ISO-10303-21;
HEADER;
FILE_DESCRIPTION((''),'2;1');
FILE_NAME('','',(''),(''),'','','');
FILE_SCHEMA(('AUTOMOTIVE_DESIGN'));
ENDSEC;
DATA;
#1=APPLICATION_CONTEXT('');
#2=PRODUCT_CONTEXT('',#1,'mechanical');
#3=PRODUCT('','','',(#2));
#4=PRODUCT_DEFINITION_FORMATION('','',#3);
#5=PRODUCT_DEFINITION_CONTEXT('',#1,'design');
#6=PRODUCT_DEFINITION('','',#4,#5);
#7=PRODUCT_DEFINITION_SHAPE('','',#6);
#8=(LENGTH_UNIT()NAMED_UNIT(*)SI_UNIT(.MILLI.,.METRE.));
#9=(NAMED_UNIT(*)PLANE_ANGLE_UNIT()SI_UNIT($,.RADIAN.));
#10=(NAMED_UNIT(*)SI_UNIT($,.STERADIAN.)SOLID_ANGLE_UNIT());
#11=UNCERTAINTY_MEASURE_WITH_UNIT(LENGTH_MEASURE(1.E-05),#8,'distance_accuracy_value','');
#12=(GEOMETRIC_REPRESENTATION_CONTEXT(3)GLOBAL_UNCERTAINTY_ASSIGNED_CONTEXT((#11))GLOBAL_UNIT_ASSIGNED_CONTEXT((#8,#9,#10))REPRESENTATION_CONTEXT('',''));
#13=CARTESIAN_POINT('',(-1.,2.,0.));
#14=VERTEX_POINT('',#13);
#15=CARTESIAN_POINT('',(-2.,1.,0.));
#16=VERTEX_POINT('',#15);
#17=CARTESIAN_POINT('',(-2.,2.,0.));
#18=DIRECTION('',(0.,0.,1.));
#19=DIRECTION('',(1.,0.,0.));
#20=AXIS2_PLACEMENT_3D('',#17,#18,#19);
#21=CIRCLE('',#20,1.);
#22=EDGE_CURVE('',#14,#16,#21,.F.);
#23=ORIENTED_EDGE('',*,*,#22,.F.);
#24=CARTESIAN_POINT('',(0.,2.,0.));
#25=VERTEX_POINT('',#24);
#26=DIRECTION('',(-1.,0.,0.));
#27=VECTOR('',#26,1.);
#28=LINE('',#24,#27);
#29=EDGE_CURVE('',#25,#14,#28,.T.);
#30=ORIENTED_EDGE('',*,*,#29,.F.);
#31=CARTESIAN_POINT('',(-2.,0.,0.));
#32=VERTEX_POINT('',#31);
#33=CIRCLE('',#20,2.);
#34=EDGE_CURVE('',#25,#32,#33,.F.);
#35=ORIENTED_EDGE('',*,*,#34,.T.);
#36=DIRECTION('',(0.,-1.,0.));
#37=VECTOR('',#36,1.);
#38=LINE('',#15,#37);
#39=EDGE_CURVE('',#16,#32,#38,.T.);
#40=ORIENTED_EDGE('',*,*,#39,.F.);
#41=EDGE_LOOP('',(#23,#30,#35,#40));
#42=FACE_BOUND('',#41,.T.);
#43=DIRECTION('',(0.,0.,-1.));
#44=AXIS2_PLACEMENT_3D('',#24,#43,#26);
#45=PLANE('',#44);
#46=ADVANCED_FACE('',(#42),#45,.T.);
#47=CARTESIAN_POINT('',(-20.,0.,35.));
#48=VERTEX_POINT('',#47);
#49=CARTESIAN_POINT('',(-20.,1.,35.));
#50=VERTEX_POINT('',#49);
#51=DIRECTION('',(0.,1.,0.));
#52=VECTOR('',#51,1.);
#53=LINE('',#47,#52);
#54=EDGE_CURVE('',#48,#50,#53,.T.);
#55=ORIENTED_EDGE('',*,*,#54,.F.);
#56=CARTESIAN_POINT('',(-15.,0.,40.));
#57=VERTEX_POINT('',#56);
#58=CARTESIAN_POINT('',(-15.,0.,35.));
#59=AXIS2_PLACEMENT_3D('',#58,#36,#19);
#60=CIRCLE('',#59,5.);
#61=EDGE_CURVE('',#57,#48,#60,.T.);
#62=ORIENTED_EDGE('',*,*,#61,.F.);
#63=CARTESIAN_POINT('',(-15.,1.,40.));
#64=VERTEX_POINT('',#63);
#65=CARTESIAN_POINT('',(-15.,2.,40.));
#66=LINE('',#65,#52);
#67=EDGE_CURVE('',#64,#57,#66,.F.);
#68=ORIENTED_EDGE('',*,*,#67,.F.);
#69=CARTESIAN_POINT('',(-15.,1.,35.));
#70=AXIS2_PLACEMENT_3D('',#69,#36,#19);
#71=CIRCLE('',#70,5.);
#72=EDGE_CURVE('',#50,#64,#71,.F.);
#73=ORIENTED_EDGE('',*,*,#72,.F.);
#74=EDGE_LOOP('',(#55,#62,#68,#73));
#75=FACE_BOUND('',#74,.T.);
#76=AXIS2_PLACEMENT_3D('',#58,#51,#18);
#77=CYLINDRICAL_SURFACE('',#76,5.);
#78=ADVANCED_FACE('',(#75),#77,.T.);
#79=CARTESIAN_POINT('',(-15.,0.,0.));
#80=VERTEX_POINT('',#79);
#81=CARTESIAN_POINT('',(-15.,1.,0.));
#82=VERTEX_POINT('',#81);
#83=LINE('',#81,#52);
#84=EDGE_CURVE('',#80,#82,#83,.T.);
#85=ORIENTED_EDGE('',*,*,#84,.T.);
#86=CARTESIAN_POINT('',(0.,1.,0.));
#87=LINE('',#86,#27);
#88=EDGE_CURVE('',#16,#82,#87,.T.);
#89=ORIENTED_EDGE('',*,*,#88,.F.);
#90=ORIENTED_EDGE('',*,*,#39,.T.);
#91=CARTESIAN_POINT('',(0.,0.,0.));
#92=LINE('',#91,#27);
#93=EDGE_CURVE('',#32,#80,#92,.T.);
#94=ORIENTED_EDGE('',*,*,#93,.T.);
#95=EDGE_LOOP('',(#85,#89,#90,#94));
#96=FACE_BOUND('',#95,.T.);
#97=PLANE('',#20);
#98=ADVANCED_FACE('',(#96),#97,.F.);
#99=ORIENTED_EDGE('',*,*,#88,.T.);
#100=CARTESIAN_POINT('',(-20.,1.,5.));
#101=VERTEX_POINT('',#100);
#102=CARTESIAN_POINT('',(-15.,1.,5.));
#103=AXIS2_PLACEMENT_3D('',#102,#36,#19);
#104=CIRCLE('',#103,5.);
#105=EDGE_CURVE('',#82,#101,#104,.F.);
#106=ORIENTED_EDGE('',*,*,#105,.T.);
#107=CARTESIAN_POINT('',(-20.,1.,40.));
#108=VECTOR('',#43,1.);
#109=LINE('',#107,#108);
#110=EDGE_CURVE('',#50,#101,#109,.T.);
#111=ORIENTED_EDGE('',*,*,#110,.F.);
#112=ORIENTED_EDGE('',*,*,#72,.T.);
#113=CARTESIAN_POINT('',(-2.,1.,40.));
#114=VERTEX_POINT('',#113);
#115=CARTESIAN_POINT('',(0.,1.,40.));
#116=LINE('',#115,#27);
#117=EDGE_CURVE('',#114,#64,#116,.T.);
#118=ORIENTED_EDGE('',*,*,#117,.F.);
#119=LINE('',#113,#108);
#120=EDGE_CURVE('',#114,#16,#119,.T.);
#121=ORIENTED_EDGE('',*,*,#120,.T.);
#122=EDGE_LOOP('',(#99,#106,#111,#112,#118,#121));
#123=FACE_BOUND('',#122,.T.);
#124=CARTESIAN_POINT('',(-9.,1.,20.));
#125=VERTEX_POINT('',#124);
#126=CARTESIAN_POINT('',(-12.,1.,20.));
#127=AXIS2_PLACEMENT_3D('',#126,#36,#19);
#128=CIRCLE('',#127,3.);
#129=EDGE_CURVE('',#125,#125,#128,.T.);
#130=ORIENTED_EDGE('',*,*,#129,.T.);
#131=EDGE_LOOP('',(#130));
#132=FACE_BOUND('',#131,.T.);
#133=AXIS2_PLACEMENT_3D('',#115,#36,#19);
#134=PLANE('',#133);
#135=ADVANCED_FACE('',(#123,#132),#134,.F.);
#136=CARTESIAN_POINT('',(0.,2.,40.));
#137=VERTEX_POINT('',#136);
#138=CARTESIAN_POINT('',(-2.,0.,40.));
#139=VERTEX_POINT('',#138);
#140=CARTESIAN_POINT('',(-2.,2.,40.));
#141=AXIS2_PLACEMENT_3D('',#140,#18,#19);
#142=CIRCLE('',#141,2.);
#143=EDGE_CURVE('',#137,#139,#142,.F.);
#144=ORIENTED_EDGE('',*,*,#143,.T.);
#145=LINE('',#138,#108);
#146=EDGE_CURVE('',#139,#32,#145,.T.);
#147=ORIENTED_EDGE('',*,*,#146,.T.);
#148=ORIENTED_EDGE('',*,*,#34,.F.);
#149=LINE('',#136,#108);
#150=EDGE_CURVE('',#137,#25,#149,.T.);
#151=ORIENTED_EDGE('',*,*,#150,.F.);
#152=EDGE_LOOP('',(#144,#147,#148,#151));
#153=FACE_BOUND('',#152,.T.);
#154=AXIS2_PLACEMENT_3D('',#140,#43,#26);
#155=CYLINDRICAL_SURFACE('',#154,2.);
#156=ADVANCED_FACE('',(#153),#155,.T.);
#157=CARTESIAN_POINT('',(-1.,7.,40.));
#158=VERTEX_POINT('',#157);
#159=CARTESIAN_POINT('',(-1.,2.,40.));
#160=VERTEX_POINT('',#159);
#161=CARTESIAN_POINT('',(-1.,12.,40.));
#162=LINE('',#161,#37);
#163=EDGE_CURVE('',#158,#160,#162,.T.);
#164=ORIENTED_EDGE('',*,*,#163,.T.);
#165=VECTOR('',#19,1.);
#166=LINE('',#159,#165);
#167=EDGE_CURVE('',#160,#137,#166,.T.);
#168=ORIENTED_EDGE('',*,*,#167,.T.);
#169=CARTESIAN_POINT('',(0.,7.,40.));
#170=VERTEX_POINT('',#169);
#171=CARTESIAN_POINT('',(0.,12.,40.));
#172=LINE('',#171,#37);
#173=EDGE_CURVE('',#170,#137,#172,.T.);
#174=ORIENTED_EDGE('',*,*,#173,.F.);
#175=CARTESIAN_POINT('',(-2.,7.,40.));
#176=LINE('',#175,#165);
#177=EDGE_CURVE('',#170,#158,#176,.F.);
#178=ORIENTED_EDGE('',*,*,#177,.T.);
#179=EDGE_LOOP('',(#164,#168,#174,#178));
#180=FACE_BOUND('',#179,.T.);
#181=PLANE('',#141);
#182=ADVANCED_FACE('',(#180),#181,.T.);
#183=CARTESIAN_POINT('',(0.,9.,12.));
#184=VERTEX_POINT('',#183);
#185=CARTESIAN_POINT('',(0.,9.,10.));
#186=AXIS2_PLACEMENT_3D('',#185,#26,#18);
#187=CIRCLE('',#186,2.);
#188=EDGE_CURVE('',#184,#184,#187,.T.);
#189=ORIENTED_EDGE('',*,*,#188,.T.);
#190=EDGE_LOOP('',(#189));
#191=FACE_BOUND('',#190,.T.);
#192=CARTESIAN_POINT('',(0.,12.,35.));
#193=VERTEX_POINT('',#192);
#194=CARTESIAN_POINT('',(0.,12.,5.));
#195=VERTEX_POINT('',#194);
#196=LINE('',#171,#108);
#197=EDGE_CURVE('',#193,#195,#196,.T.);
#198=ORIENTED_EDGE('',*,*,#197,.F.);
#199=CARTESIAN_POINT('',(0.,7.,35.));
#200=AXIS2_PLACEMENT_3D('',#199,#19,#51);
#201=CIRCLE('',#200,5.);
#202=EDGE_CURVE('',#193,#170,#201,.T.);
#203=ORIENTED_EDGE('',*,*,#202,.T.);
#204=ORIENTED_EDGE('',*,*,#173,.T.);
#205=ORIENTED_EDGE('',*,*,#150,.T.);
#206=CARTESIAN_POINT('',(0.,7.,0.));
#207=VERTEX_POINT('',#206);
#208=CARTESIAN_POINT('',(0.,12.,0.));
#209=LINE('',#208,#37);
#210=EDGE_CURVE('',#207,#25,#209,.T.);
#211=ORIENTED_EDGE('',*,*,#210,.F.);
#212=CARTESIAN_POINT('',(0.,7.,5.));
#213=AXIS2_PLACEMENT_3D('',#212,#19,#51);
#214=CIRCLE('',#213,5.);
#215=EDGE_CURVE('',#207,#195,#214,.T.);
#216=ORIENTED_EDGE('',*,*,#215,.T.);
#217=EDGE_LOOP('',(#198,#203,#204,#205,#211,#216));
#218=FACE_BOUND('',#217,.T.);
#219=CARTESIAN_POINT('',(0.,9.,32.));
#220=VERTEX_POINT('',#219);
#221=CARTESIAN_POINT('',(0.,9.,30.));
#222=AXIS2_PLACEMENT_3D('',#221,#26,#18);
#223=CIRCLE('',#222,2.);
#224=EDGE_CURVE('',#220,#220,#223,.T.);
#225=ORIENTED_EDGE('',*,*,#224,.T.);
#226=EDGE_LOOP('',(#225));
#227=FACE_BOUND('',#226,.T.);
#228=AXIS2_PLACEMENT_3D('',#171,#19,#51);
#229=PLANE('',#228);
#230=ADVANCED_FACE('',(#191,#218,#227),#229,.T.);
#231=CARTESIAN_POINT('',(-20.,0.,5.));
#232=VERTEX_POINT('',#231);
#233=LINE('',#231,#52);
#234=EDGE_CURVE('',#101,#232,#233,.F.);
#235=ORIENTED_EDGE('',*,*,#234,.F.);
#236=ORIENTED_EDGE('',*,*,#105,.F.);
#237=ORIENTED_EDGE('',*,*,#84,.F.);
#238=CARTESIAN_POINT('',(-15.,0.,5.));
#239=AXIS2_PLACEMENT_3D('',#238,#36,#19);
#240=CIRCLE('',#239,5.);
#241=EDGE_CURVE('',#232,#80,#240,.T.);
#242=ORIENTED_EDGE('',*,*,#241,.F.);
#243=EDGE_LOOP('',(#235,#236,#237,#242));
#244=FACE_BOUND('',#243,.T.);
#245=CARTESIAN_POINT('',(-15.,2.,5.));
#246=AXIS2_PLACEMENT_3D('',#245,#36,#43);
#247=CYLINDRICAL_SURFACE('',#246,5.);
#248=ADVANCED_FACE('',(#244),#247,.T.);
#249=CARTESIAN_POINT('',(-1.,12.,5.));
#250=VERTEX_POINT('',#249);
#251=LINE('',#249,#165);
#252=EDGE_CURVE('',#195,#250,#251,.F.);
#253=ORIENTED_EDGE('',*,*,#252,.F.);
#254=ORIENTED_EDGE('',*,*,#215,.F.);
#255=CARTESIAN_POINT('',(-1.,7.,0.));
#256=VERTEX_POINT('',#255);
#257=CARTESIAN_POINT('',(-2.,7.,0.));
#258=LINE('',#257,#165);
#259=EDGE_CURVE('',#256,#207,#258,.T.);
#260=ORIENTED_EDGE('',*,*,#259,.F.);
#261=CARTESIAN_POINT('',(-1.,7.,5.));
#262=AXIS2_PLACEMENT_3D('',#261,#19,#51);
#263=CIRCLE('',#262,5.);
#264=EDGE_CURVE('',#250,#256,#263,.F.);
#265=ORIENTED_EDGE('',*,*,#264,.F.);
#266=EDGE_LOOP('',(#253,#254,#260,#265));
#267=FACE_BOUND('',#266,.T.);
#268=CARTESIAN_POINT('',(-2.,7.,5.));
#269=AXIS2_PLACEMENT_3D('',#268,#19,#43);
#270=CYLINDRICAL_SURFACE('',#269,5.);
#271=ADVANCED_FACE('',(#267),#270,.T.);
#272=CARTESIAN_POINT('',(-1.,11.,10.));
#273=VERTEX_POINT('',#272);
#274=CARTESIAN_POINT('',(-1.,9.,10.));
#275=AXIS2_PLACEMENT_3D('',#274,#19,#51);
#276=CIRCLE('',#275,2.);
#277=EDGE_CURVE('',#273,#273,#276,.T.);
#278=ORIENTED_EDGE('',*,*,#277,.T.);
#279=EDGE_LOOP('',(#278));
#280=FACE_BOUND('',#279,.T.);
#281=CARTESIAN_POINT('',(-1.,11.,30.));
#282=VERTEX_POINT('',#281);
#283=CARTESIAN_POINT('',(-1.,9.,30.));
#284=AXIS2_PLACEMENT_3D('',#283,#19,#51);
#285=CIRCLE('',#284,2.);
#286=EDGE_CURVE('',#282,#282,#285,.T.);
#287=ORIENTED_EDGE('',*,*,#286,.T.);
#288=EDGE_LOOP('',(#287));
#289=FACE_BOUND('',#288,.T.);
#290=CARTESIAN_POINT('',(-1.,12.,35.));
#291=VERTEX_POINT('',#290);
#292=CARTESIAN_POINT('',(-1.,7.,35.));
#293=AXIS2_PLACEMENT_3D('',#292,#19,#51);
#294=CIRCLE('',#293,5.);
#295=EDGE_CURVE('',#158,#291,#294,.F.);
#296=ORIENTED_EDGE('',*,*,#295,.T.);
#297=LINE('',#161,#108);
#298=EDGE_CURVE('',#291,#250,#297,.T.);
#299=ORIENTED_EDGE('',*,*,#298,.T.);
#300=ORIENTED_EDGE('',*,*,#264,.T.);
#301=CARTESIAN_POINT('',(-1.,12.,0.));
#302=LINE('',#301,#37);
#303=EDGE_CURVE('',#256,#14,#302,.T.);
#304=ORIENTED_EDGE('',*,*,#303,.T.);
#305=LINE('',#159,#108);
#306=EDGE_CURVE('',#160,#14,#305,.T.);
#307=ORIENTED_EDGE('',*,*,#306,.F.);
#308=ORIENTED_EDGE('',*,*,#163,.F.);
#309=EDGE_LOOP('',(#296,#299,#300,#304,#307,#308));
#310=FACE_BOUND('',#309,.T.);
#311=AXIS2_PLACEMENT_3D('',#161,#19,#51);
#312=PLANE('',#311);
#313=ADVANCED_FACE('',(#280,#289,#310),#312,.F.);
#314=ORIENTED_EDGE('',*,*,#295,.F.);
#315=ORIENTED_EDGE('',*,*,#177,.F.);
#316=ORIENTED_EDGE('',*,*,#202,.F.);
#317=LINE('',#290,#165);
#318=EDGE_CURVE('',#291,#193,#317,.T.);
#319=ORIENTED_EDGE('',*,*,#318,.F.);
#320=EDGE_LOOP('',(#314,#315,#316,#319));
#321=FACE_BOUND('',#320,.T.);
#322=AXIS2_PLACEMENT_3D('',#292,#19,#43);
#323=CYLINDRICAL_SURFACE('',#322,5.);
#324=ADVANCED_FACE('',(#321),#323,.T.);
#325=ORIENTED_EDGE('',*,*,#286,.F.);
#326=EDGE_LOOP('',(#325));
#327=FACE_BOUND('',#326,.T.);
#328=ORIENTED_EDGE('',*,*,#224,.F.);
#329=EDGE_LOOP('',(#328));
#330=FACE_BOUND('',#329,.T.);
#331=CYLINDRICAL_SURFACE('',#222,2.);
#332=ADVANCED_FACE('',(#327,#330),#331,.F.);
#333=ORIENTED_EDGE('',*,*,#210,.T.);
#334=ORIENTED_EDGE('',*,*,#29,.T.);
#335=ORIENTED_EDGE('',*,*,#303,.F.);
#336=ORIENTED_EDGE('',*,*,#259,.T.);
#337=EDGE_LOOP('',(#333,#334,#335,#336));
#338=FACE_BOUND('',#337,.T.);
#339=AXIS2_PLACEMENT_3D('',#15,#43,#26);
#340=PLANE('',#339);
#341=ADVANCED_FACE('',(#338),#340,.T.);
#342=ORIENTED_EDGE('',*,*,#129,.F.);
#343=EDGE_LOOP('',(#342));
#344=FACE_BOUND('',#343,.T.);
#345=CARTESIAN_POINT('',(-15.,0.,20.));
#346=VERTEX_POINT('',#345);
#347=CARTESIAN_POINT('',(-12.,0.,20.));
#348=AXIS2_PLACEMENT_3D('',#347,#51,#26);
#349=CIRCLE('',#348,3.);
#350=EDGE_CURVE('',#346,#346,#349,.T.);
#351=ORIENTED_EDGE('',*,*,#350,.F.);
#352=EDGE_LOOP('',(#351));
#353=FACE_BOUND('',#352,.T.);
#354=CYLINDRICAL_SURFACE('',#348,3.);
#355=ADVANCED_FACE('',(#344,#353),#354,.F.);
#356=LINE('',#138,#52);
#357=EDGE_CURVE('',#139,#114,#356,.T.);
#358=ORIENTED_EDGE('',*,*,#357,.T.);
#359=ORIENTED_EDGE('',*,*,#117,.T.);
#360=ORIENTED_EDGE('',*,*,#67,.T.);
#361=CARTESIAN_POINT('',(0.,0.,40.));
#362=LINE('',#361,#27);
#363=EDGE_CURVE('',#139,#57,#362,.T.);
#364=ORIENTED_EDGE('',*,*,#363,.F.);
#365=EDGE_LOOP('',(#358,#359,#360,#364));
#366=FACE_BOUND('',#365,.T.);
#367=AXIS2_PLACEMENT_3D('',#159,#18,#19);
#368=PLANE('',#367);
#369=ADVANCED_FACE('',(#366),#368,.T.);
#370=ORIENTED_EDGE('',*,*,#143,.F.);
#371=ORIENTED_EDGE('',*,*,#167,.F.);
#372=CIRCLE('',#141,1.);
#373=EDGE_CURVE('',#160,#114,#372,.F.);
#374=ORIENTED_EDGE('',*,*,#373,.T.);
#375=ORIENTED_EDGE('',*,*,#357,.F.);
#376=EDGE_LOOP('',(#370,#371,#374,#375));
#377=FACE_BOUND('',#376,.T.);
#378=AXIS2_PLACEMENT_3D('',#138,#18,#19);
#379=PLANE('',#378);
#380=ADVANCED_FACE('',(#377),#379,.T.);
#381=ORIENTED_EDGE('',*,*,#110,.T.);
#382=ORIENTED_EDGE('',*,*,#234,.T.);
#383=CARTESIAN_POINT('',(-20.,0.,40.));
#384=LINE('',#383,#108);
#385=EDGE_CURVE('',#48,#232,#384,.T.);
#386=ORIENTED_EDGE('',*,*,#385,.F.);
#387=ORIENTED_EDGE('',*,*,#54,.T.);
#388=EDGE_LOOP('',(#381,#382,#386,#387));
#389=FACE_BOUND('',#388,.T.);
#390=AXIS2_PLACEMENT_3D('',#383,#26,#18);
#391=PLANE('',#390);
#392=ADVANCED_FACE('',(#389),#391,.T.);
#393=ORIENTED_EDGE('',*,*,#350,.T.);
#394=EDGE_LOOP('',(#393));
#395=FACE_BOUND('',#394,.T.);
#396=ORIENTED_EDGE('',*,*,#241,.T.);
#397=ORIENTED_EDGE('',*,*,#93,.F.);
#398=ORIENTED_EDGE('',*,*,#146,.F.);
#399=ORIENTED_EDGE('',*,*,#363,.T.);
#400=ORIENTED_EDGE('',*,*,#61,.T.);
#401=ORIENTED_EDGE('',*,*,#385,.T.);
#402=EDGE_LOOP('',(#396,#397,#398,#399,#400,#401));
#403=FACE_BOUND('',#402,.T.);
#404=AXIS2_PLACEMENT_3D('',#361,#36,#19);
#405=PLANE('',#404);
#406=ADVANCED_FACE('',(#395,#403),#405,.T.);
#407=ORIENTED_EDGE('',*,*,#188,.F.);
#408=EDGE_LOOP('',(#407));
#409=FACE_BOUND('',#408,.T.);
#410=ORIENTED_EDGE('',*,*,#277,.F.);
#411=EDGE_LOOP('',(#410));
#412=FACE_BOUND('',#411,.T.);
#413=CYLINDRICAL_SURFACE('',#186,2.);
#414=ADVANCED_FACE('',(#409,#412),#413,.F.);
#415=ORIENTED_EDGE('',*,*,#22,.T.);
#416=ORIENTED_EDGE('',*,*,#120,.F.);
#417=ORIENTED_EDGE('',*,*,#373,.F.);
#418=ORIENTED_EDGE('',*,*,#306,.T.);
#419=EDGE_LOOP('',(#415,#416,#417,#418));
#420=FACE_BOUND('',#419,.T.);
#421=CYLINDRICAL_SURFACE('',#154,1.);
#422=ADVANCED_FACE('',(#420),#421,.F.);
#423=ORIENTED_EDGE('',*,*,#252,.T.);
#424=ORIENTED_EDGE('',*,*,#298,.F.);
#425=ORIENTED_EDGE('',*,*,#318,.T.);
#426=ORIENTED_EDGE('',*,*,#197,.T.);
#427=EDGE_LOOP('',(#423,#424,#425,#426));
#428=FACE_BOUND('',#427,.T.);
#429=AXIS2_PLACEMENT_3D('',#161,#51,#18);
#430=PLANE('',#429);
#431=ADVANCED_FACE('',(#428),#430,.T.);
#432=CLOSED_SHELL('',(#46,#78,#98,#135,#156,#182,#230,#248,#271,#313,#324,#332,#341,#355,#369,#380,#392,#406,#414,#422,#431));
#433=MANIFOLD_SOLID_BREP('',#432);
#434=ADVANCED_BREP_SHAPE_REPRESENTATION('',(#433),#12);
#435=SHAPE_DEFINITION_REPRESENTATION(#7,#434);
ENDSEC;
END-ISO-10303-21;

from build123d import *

# Parameters (mm, degrees)
BASE_FLANGE1_DEPTH      = 40
CUT_EXTRUDE1_DEPTH      = 47.054315759
CUT_EXTRUDE1_DEPTH_BACK = 47.054315759
SKETCH6_R               = 3
CUT_EXTRUDE2_DEPTH      = 46.880278988
CUT_EXTRUDE2_DEPTH_BACK = 46.880278988
SKETCH7_R               = 2
FILLET1_R               = 5


# Sheet-metal steps are written as plain solids
with BuildPart() as part:
    # Sketch1 → Base-Flange1 (new body)
    with BuildSketch(Plane.XY):
        with BuildLine():
            Line((0, 12), (0, 2))
            ThreePointArc((0, 2), (-0.585786438, 0.585786438), (-2, 0))
            Line((-2, 0), (-20, 0))
            Line((-20, 0), (-20, 1))
            Line((-20, 1), (-2, 1))
            ThreePointArc((-2, 1), (-1.292893219, 1.292893219), (-1, 2))
            Line((-1, 2), (-1, 12))
            Line((-1, 12), (0, 12))
        make_face()
    extrude(amount=BASE_FLANGE1_DEPTH)

    # Sketch6 → Cut-Extrude1 (cut, two sides: drawn at the far end of the back side and taken through both)
    with BuildSketch(Plane(origin=(0, 1, 0), x_dir=(1, 0, 0), z_dir=(0, 1, 0)).offset(-CUT_EXTRUDE1_DEPTH_BACK)):
        with Locations(Location((-12, -20, 0), (0, 0, 180))):
            Circle(SKETCH6_R)
    extrude(amount=CUT_EXTRUDE1_DEPTH + CUT_EXTRUDE1_DEPTH_BACK, mode=Mode.SUBTRACT)

    # Sketch7 → Cut-Extrude2 (cut, two sides: drawn at the far end of the back side and taken through both)
    with BuildSketch(Plane.ZY.offset(1).offset(-CUT_EXTRUDE2_DEPTH_BACK)):
        with Locations((10, 9)):
            Circle(SKETCH7_R)
        with Locations((30, 9)):
            Circle(SKETCH7_R)
    extrude(amount=CUT_EXTRUDE2_DEPTH + CUT_EXTRUDE2_DEPTH_BACK, mode=Mode.SUBTRACT)

    # Fillet1
    fillet1_edges = [part.edges().sort_by_distance(p)[0] for p in [
        (-0.5, 12, 40),
        (-0.5, 12, 0),
        (-20, 0.5, 40),
        (-20, 0.5, 0),
    ]]
    fillet(fillet1_edges, radius=FILLET1_R)


solid = part.part
